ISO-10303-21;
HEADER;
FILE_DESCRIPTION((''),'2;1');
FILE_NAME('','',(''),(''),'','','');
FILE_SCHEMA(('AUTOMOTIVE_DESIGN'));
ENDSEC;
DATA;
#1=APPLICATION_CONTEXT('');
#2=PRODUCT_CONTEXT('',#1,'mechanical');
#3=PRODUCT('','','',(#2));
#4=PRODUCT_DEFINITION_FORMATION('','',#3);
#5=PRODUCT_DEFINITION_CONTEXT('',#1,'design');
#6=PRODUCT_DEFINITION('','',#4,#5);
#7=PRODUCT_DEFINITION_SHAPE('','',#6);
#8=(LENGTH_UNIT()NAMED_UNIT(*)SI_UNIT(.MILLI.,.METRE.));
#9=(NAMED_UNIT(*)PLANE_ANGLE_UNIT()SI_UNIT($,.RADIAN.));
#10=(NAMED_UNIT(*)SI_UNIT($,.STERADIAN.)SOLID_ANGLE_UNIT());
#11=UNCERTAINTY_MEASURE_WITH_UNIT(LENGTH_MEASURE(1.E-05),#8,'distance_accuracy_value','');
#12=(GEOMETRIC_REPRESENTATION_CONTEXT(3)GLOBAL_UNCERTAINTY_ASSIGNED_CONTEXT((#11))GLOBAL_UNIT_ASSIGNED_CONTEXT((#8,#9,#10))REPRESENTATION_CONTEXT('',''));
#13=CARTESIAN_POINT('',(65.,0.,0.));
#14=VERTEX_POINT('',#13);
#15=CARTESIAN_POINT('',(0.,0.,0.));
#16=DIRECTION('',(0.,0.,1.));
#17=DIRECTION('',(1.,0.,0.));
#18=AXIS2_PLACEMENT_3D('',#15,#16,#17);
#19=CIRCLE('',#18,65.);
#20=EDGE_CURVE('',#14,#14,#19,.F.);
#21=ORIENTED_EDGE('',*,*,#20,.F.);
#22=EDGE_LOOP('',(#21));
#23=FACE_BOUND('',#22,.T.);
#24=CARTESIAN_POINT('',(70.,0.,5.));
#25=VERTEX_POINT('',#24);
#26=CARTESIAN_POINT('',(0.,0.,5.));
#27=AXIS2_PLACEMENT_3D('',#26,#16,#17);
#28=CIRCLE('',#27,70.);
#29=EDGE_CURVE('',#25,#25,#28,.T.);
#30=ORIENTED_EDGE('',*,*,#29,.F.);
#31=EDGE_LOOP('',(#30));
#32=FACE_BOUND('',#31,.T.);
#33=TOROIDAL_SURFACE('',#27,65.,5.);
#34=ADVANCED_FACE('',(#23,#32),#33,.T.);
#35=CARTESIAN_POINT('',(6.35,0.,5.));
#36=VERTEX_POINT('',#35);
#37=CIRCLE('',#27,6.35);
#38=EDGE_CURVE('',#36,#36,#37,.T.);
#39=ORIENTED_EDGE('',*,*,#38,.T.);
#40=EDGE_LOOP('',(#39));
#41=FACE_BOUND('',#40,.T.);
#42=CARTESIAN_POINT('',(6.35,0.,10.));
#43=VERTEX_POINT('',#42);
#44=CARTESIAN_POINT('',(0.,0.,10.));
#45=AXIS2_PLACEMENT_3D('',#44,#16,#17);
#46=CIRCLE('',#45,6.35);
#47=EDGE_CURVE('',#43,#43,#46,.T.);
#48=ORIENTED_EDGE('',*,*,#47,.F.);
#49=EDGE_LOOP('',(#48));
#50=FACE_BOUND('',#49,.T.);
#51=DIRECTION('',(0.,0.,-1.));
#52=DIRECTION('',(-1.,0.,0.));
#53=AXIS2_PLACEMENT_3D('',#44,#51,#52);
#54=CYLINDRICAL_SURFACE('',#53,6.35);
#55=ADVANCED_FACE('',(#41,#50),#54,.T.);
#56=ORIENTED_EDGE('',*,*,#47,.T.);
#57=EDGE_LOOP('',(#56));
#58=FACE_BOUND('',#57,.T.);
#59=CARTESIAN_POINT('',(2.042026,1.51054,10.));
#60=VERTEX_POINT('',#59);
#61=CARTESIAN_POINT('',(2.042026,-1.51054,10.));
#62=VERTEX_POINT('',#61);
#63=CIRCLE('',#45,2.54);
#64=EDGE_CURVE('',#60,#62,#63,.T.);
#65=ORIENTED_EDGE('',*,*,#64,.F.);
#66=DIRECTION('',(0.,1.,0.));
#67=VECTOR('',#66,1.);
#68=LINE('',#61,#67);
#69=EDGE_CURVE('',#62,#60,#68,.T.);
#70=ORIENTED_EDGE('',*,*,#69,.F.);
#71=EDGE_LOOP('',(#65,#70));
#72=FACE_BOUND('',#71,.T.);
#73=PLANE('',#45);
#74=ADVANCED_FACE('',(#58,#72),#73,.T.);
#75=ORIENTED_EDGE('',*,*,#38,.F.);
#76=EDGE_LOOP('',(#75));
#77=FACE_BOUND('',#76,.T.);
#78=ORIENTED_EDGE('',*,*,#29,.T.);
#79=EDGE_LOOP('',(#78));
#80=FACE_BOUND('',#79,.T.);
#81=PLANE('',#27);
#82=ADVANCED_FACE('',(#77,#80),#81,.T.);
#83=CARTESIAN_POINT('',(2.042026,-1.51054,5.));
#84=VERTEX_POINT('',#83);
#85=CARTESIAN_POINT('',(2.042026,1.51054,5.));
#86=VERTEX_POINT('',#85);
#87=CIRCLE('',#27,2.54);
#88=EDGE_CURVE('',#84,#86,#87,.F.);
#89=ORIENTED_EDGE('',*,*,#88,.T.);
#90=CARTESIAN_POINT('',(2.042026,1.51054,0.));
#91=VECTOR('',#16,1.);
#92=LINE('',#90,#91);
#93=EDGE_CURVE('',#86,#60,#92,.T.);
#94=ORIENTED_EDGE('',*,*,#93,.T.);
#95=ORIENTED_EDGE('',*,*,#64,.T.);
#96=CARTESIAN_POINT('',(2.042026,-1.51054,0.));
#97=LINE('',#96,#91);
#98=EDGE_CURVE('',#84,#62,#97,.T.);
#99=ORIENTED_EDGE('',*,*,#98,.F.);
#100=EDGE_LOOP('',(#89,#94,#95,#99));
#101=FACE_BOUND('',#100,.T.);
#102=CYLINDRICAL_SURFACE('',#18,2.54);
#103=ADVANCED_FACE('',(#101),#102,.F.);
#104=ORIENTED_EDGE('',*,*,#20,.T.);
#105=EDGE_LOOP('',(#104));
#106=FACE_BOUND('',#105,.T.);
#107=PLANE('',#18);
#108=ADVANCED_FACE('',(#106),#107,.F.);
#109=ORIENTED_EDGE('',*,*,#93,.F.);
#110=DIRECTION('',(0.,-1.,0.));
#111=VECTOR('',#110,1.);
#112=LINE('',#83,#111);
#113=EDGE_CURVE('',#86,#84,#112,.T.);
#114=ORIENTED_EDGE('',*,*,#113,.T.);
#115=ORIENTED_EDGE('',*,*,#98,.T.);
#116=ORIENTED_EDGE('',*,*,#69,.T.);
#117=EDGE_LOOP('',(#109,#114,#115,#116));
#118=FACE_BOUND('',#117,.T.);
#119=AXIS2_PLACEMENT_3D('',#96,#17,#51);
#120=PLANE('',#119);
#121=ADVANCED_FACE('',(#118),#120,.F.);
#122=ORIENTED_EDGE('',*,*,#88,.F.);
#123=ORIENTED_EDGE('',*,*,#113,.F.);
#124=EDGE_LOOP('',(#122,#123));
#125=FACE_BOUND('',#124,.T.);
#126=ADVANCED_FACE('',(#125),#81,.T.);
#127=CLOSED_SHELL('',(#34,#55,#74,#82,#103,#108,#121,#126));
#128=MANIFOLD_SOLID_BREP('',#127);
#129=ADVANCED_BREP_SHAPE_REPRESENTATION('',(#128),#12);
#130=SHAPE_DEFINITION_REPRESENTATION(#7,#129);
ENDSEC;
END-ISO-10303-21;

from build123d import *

# Parameters (mm, degrees)
SKETCH3_R           = 6.35
BOSS_EXTRUDE2_DEPTH = 10
CUT_EXTRUDE2_DEPTH  = 10
SKETCH5_R           = 70
BOSS_EXTRUDE3_DEPTH = 5
FILLET1_R           = 5


with BuildPart() as part:
    # Sketch3 → Boss-Extrude2 (new body)
    with BuildSketch(Plane.XY):
        Circle(SKETCH3_R)
    extrude(amount=BOSS_EXTRUDE2_DEPTH)

    # Sketch4 → Cut-Extrude2 (cut)
    with BuildSketch(Plane.XY.offset(10)):
        with BuildLine():
            Line((2.042025903, -1.510539709), (2.042025903, 1.510539709))
            ThreePointArc((2.042025903, 1.510539709), (-2.54, 0), (2.042025903, -1.510539709))
        make_face()
    extrude(amount=-CUT_EXTRUDE2_DEPTH, mode=Mode.SUBTRACT)

    # Sketch5 → Boss-Extrude3 (add)
    with BuildSketch(Plane.XY):
        Circle(SKETCH5_R)
    extrude(amount=BOSS_EXTRUDE3_DEPTH)

    # Fillet1
    fillet1_edges = [part.edges().sort_by_distance(p)[0] for p in [
        (-70, 0, 0),
    ]]
    fillet(fillet1_edges, radius=FILLET1_R - 0.0001)  # a hair under: the kernel refuses the full size


solid = part.part
